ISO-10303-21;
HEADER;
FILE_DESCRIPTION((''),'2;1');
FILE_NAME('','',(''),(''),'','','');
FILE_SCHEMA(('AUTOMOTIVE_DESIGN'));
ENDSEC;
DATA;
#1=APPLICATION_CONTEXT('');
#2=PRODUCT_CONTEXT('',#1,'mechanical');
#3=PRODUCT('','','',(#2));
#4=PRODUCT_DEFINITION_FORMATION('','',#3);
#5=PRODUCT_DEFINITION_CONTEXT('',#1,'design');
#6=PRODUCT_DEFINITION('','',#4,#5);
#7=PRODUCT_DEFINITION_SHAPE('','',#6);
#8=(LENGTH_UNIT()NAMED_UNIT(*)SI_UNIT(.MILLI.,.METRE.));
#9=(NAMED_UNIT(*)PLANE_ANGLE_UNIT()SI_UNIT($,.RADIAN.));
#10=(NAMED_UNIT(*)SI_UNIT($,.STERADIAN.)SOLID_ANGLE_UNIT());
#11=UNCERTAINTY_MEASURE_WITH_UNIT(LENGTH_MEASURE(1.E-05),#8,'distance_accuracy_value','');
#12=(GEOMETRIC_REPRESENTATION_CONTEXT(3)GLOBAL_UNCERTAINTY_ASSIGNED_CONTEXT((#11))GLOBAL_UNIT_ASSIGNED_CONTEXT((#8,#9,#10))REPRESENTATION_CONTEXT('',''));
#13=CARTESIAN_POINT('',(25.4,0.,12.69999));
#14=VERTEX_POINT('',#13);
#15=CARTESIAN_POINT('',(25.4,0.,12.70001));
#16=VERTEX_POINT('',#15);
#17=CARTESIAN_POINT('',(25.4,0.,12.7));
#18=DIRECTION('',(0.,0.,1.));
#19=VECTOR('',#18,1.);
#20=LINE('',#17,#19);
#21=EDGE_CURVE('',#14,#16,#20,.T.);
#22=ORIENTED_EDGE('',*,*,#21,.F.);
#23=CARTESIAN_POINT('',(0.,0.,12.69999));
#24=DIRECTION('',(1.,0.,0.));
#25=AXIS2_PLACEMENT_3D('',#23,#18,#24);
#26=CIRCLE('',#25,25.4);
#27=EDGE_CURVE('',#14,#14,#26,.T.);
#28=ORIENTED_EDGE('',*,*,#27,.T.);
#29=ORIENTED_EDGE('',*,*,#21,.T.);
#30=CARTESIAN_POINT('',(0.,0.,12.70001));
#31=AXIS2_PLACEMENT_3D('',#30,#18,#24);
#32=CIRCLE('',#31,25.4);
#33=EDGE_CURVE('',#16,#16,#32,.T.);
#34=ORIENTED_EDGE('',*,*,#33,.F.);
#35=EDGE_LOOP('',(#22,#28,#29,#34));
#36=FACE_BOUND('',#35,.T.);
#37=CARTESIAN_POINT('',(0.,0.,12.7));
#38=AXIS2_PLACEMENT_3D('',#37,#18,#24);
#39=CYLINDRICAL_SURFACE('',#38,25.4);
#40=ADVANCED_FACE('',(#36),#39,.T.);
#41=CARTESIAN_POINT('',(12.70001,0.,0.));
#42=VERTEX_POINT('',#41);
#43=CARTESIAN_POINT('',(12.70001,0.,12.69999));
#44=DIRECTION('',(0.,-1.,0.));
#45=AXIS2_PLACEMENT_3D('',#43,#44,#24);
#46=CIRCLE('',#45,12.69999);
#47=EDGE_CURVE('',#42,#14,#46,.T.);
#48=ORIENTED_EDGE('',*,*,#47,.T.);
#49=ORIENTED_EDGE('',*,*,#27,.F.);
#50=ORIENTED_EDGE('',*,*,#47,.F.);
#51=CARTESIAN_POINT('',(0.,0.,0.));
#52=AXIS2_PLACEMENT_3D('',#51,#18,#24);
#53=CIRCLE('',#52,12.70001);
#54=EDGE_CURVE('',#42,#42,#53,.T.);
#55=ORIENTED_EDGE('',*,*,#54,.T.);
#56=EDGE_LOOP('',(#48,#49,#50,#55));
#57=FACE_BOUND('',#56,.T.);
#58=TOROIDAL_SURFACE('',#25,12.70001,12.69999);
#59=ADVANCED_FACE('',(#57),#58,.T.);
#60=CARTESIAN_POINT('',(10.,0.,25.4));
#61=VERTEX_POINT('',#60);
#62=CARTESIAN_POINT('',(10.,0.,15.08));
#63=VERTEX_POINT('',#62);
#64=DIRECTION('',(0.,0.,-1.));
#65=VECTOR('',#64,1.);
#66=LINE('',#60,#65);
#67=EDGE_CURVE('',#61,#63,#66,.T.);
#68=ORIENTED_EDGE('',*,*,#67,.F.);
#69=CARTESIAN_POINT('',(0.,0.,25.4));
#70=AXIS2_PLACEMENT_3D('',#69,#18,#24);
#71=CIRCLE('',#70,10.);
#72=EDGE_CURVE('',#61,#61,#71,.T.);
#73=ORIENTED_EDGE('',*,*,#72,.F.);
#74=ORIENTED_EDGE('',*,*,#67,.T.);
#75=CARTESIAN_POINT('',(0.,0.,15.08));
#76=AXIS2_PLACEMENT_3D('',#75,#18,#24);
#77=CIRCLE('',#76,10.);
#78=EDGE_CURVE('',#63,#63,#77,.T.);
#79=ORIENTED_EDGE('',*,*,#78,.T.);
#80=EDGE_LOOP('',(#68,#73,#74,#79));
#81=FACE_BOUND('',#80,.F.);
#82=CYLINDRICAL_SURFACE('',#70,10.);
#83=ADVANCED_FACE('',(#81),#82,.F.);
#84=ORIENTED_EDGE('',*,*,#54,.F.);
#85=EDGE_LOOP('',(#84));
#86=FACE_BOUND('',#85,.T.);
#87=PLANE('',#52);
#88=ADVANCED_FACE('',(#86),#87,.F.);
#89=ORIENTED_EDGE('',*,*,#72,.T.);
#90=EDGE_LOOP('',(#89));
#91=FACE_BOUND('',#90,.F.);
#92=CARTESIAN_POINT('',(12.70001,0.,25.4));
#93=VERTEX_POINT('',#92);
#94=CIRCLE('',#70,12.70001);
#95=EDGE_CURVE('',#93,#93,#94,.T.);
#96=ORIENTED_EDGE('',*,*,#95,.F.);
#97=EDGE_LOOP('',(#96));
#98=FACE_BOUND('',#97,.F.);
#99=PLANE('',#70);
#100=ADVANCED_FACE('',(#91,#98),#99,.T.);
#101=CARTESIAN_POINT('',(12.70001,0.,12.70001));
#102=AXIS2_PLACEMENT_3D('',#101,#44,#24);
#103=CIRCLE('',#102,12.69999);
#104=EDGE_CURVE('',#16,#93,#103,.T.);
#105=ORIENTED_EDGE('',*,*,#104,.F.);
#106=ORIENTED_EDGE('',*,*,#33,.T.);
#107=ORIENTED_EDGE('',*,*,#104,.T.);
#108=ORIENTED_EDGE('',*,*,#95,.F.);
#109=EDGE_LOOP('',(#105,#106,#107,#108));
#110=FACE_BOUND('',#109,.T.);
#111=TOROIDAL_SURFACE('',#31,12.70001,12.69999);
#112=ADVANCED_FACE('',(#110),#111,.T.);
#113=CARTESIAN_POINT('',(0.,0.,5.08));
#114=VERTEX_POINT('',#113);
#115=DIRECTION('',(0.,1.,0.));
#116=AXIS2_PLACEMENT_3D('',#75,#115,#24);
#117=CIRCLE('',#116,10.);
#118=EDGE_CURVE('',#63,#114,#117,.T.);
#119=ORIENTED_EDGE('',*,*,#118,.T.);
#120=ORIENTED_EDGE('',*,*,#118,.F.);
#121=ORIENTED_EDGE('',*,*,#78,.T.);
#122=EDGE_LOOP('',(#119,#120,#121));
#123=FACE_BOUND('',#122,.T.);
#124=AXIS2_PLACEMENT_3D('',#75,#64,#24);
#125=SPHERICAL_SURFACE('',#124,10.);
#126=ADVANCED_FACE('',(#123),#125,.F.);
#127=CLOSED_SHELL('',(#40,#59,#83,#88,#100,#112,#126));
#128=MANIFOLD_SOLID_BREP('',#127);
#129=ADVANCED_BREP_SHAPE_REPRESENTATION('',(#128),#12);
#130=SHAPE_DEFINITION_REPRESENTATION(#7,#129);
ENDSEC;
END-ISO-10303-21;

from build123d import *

# Parameters (mm, degrees)
F0_W     = 25.4
F0_H     = 25.4
F2_R     = 12.69999
F3_R     = 10
F4_DEPTH = 20.32
F5_R     = 10


# Not quite as in the source:
# - a fillet or chamfer is up to 0.001 mm smaller than in the source, because OpenCascade refuses the exact size


with BuildPart() as f1:
    # F0 (on Front) → F1 (revolve)
    with BuildSketch(Plane.XZ):
        with Locations((12.7, 12.7)):
            Rectangle(F0_W, F0_H)
    revolve(axis=Axis((0, 0, 17.3243917525), (0, 0, 1)))

    # F2 (radius 12.7 in the source; OpenCascade refuses exactly that, so slightly less here)
    f2_edges = [f1.edges().sort_by_distance(p)[0] for p in [
        (-25.4, 0, 0),
        (-25.4, 0, 25.4),
        (25.4, 0, 12.7),
    ]]
    fillet(f2_edges, radius=F2_R)

    # F3 (on face) → F4 (cut)
    with BuildSketch(Plane.XY.offset(25.4)):
        Circle(F3_R)
    extrude(amount=-F4_DEPTH, mode=Mode.SUBTRACT)

    # F5
    f5_edges = [f1.edges().sort_by_distance(p)[0] for p in [
        (-10, 0, 5.08),
    ]]
    fillet(f5_edges, radius=F5_R)


solid = f1.part
